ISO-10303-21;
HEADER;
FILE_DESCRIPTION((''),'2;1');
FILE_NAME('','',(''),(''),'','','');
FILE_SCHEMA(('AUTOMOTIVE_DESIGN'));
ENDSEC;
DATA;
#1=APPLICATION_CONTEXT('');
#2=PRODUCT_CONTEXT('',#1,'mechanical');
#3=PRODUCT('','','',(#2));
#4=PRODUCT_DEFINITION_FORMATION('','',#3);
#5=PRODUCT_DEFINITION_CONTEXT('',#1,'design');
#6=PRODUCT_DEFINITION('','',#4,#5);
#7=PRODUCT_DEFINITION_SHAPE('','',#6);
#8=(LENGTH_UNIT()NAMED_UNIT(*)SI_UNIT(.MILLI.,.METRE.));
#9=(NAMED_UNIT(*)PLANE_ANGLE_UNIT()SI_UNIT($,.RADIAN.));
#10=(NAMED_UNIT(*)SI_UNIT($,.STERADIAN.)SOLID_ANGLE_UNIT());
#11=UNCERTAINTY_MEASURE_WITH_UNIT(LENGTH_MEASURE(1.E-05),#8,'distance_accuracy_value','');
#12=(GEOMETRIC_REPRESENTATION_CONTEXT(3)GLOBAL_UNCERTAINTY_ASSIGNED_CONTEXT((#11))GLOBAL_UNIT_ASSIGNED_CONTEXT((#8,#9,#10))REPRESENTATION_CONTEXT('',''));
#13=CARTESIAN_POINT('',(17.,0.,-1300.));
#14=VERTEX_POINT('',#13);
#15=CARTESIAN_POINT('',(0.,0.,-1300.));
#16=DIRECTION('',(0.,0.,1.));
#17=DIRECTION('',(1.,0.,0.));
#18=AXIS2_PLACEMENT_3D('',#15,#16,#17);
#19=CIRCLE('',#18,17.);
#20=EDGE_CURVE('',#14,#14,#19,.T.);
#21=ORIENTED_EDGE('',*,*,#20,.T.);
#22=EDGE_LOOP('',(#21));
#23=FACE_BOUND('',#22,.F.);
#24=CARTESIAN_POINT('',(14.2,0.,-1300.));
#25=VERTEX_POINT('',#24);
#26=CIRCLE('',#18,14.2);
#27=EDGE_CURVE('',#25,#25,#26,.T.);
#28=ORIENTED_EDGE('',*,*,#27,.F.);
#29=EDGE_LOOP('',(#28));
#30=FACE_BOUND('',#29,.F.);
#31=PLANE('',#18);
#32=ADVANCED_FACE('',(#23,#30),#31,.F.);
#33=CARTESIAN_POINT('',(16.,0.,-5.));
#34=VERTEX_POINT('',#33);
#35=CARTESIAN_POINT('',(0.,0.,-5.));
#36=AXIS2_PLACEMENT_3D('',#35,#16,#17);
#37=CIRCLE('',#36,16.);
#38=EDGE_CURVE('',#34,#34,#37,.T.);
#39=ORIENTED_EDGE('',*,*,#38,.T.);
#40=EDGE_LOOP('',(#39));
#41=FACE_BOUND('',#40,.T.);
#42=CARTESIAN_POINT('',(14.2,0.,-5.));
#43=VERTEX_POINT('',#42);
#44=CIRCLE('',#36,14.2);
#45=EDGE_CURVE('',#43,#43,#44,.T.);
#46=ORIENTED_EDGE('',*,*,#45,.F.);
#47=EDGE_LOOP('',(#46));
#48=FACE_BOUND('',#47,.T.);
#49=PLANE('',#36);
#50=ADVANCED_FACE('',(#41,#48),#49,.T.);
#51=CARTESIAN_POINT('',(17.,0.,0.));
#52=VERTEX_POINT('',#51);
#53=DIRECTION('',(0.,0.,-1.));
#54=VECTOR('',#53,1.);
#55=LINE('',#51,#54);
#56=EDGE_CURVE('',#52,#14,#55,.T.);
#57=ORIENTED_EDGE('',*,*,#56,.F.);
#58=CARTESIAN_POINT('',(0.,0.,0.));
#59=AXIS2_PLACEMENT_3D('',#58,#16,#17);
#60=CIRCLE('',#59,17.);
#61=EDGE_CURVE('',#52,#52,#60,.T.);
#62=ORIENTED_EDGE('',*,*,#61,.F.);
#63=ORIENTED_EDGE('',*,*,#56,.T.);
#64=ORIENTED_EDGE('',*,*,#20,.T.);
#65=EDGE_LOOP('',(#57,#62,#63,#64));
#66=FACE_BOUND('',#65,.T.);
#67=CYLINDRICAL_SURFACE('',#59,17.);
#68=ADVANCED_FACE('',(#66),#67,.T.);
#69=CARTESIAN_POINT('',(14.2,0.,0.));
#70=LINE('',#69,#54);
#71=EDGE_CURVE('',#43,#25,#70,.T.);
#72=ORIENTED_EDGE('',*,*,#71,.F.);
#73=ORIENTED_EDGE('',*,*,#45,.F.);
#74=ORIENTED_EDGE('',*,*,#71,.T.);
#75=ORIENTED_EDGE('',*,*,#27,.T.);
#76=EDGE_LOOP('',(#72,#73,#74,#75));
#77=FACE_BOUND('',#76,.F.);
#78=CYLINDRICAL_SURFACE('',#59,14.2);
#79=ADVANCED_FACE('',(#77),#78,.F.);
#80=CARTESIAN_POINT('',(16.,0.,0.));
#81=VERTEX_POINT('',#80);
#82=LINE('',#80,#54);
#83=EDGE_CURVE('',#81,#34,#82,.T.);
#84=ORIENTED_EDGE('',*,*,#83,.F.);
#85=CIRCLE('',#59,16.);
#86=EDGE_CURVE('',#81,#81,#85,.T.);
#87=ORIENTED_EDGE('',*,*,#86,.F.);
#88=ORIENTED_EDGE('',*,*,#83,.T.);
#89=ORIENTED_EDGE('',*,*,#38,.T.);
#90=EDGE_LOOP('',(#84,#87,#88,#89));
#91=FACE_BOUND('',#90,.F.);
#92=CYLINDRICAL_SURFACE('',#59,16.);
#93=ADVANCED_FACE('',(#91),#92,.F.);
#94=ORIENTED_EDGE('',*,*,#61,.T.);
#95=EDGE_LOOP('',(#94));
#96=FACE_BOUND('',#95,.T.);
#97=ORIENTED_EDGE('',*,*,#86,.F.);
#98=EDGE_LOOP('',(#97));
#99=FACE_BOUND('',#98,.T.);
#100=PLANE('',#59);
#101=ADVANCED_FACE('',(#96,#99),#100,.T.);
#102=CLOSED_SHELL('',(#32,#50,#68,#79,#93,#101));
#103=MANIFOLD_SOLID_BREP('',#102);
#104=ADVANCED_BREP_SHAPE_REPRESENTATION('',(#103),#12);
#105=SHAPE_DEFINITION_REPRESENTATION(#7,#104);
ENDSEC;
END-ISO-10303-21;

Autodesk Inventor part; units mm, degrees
ref_plane "YZ Plane" through (0, 0, 0) normal (1, 0, 0) x (0, 1, 0)
ref_plane "XZ Plane" through (0, 0, 0) normal (0, 1, 0) x (-1, 0, 0)
ref_plane "XY Plane" through (0, 0, 0) normal (0, 0, 1) x (1, 0, 0)
sketch "スケッチ1" plane through (0, 0, 0) normal (0, 0, 1) x (1, 0, 0)
  circle A0 centre (0, 0) radius 17
  circle A1 centre (0, 0) radius 14.2
  dimension "d0" = 34
  dimension "d1" = 28.4
extrude "押し出し1" add sketch "スケッチ1" against normal blind 1300
sketch "スケッチ3" plane through (0, 0, 0) normal (0, 0, 1) x (1, 0, 0)
  circle A0 centre (0, 0) radius 16
  dimension "d8" = 32
extrude "押し出し3" cut sketch "スケッチ3" against normal blind 5
equation "\"BendRadius\" = Thickness"
equation "\"BendReliefWidth\" = Thickness"
equation "\"BendReliefDepth\" = 0.5 * Thickness"
equation "\"CornerReliefSize\" = 4 * Thickness"
equation "\"MinimumRemnant\" = 2 * Thickness"
equation "\"TransitionRadius\" = BendRadius"
equation "\"JacobiRadiusSize\" = BendRadius"
equation "\"GapSize\" = Thickness"
equation "\"Thickness\" = 3.048"
properties part number "B_probe_pipe_5_for-non-bellows" material "ステンレス鋼 440C"
